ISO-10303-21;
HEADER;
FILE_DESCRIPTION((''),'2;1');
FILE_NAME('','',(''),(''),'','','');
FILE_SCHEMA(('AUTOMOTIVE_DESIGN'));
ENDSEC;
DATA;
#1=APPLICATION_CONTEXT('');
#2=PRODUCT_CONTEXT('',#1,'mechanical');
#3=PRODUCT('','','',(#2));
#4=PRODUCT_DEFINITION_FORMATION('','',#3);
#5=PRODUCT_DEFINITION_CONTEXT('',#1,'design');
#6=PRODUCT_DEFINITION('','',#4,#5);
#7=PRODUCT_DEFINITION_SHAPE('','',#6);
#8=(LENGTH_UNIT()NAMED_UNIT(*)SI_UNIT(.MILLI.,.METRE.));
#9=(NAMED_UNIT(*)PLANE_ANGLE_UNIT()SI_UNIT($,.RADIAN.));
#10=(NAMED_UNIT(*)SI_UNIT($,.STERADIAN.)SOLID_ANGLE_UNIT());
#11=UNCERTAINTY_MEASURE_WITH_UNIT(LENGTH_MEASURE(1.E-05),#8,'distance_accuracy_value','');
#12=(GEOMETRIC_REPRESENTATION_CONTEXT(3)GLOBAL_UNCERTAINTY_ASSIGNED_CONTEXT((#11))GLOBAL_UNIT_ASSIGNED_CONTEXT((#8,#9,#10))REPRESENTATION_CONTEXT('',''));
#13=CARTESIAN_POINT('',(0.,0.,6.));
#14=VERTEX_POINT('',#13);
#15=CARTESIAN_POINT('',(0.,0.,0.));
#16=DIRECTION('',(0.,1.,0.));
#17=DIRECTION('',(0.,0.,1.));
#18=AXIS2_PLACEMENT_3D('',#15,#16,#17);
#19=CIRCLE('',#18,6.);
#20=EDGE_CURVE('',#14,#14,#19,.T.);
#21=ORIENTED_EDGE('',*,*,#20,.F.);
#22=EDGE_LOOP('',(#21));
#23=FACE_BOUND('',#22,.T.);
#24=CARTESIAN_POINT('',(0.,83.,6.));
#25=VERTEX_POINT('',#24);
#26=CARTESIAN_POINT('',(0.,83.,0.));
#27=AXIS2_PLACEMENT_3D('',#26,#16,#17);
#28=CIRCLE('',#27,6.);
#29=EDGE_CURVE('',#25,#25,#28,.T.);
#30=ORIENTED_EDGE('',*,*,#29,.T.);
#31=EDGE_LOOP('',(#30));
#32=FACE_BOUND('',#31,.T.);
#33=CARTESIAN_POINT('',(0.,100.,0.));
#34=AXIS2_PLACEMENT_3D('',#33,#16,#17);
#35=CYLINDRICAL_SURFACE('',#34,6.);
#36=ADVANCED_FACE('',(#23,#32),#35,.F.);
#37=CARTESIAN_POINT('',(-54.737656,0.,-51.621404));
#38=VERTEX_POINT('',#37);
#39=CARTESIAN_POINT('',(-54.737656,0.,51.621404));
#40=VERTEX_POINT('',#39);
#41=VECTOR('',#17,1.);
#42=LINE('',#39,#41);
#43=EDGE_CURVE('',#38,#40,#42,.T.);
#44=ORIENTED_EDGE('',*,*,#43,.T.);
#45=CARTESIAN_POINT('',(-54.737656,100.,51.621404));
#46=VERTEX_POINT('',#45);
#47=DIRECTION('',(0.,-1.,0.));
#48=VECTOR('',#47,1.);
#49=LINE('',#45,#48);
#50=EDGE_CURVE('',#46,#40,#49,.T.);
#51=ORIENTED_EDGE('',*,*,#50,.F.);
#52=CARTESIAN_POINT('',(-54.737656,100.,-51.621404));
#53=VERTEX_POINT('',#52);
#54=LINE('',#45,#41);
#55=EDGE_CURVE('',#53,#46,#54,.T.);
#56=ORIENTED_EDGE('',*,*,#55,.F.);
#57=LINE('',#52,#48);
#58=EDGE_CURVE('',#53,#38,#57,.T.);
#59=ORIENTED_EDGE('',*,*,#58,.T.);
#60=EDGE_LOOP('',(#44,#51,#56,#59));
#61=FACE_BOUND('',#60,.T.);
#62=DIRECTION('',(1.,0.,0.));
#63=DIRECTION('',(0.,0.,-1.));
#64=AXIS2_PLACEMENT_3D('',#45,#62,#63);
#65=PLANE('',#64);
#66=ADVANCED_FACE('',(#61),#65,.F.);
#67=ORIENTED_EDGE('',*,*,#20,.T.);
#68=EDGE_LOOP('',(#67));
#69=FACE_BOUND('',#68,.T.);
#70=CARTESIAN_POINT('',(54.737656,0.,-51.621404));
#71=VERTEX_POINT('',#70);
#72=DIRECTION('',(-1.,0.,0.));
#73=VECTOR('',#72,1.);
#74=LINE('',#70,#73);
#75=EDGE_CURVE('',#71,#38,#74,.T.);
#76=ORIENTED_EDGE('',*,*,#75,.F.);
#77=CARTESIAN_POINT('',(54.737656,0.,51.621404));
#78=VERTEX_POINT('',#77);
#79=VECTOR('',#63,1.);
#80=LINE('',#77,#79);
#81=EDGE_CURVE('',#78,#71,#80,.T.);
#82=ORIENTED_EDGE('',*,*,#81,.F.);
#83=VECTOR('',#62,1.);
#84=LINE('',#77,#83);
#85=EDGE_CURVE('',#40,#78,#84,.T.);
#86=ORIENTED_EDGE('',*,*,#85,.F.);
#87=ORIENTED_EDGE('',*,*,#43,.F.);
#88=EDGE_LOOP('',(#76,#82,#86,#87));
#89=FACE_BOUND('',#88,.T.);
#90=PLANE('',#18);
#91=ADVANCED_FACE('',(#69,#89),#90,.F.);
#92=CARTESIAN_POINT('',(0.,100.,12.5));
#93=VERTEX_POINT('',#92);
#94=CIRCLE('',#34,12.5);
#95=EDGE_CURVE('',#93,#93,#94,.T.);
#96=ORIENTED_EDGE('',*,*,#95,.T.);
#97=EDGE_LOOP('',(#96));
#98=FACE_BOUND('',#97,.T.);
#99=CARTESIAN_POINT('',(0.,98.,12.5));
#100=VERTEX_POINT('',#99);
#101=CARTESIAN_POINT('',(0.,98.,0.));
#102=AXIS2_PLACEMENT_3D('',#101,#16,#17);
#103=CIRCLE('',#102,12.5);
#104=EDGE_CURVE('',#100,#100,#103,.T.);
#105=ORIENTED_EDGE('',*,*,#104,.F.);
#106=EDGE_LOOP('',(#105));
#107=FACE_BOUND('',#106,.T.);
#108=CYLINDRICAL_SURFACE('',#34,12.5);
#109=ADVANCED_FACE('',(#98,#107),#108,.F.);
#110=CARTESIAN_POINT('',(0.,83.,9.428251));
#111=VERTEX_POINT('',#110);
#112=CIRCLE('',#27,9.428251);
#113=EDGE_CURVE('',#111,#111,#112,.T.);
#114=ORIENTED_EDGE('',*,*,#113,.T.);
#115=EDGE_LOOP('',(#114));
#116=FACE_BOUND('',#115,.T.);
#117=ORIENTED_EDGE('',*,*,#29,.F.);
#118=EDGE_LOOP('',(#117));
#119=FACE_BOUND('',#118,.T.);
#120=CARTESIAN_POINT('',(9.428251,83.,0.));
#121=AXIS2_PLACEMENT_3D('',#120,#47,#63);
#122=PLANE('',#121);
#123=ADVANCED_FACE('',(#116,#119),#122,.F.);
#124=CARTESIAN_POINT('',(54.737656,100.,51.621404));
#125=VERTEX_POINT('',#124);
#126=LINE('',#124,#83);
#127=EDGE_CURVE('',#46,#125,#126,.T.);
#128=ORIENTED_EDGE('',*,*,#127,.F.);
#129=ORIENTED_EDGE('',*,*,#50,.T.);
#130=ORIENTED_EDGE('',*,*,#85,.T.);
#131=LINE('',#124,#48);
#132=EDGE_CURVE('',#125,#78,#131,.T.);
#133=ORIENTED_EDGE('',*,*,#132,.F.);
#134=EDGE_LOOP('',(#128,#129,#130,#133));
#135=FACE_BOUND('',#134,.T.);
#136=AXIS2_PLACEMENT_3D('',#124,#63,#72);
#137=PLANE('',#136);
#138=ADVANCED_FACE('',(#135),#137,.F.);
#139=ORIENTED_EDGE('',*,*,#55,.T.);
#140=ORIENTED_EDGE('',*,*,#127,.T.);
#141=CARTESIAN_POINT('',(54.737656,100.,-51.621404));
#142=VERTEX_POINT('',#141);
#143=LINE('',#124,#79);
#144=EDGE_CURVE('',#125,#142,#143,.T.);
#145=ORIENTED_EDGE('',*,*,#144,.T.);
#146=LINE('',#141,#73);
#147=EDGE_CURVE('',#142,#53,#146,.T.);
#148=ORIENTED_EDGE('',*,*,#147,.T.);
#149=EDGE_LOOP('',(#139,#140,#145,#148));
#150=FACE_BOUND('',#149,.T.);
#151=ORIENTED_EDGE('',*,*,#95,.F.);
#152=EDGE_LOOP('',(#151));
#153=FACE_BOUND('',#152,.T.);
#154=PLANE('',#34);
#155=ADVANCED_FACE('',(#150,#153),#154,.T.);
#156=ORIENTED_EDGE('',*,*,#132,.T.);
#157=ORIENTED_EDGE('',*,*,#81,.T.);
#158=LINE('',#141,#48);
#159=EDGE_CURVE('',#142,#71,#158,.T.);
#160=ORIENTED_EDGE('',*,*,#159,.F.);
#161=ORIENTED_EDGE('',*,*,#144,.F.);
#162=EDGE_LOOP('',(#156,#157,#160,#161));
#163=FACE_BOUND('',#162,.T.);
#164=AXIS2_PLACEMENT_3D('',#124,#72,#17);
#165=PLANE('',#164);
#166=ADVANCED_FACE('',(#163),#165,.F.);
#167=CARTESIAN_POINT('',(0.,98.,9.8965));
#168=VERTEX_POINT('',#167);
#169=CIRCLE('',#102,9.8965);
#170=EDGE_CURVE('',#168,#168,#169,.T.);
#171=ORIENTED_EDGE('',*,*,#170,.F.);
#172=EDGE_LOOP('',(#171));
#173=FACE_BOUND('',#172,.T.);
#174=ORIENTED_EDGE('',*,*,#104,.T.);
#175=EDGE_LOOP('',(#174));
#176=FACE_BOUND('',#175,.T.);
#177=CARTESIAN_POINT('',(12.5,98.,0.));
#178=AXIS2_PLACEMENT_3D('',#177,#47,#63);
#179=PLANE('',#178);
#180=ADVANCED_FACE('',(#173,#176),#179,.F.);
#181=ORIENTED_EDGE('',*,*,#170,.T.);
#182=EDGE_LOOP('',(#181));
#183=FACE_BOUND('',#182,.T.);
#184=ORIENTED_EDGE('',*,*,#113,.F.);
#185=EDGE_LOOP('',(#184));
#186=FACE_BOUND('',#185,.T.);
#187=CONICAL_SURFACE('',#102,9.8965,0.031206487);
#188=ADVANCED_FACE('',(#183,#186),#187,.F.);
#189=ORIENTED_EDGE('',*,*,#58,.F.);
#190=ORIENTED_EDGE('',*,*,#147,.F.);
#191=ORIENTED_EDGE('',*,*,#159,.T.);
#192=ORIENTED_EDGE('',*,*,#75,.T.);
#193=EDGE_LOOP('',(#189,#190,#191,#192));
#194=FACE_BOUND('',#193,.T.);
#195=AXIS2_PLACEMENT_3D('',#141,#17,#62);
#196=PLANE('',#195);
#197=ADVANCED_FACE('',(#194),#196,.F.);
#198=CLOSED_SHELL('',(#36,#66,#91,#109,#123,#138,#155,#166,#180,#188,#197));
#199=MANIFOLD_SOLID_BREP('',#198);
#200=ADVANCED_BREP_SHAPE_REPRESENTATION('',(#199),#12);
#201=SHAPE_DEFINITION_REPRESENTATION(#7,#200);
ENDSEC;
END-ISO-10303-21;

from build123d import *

# Parameters (mm, degrees)
SKETCH1_W           = 109.475312552
SKETCH1_H           = 103.242807134
BOSS_EXTRUDE1_DEPTH = 100


# Read off the part's stored shape, not the designer's step: AdvancedHole2
with BuildPart() as part:
    # Sketch1 → Boss-Extrude1 (new body)
    with BuildSketch(Plane(origin=(0, 0, 0), x_dir=(1, 0, 0), z_dir=(0, 1, 0))):
        Rectangle(SKETCH1_W, SKETCH1_H)
    extrude(amount=BOSS_EXTRUDE1_DEPTH)

    # AdvancedHole2 outline → AdvancedHole2 (revolve, cut)
    with BuildSketch(Plane.XY):
        Polygon((9.8965, 98), (12.5, 98), (12.5, 100), (0, 100), (0, 0), (6, 0), (6, 83), (9.428250684, 83), align=None)
    revolve(axis=Axis((0, 0, 0), (0, 1, 0)), mode=Mode.SUBTRACT)


solid = part.part
